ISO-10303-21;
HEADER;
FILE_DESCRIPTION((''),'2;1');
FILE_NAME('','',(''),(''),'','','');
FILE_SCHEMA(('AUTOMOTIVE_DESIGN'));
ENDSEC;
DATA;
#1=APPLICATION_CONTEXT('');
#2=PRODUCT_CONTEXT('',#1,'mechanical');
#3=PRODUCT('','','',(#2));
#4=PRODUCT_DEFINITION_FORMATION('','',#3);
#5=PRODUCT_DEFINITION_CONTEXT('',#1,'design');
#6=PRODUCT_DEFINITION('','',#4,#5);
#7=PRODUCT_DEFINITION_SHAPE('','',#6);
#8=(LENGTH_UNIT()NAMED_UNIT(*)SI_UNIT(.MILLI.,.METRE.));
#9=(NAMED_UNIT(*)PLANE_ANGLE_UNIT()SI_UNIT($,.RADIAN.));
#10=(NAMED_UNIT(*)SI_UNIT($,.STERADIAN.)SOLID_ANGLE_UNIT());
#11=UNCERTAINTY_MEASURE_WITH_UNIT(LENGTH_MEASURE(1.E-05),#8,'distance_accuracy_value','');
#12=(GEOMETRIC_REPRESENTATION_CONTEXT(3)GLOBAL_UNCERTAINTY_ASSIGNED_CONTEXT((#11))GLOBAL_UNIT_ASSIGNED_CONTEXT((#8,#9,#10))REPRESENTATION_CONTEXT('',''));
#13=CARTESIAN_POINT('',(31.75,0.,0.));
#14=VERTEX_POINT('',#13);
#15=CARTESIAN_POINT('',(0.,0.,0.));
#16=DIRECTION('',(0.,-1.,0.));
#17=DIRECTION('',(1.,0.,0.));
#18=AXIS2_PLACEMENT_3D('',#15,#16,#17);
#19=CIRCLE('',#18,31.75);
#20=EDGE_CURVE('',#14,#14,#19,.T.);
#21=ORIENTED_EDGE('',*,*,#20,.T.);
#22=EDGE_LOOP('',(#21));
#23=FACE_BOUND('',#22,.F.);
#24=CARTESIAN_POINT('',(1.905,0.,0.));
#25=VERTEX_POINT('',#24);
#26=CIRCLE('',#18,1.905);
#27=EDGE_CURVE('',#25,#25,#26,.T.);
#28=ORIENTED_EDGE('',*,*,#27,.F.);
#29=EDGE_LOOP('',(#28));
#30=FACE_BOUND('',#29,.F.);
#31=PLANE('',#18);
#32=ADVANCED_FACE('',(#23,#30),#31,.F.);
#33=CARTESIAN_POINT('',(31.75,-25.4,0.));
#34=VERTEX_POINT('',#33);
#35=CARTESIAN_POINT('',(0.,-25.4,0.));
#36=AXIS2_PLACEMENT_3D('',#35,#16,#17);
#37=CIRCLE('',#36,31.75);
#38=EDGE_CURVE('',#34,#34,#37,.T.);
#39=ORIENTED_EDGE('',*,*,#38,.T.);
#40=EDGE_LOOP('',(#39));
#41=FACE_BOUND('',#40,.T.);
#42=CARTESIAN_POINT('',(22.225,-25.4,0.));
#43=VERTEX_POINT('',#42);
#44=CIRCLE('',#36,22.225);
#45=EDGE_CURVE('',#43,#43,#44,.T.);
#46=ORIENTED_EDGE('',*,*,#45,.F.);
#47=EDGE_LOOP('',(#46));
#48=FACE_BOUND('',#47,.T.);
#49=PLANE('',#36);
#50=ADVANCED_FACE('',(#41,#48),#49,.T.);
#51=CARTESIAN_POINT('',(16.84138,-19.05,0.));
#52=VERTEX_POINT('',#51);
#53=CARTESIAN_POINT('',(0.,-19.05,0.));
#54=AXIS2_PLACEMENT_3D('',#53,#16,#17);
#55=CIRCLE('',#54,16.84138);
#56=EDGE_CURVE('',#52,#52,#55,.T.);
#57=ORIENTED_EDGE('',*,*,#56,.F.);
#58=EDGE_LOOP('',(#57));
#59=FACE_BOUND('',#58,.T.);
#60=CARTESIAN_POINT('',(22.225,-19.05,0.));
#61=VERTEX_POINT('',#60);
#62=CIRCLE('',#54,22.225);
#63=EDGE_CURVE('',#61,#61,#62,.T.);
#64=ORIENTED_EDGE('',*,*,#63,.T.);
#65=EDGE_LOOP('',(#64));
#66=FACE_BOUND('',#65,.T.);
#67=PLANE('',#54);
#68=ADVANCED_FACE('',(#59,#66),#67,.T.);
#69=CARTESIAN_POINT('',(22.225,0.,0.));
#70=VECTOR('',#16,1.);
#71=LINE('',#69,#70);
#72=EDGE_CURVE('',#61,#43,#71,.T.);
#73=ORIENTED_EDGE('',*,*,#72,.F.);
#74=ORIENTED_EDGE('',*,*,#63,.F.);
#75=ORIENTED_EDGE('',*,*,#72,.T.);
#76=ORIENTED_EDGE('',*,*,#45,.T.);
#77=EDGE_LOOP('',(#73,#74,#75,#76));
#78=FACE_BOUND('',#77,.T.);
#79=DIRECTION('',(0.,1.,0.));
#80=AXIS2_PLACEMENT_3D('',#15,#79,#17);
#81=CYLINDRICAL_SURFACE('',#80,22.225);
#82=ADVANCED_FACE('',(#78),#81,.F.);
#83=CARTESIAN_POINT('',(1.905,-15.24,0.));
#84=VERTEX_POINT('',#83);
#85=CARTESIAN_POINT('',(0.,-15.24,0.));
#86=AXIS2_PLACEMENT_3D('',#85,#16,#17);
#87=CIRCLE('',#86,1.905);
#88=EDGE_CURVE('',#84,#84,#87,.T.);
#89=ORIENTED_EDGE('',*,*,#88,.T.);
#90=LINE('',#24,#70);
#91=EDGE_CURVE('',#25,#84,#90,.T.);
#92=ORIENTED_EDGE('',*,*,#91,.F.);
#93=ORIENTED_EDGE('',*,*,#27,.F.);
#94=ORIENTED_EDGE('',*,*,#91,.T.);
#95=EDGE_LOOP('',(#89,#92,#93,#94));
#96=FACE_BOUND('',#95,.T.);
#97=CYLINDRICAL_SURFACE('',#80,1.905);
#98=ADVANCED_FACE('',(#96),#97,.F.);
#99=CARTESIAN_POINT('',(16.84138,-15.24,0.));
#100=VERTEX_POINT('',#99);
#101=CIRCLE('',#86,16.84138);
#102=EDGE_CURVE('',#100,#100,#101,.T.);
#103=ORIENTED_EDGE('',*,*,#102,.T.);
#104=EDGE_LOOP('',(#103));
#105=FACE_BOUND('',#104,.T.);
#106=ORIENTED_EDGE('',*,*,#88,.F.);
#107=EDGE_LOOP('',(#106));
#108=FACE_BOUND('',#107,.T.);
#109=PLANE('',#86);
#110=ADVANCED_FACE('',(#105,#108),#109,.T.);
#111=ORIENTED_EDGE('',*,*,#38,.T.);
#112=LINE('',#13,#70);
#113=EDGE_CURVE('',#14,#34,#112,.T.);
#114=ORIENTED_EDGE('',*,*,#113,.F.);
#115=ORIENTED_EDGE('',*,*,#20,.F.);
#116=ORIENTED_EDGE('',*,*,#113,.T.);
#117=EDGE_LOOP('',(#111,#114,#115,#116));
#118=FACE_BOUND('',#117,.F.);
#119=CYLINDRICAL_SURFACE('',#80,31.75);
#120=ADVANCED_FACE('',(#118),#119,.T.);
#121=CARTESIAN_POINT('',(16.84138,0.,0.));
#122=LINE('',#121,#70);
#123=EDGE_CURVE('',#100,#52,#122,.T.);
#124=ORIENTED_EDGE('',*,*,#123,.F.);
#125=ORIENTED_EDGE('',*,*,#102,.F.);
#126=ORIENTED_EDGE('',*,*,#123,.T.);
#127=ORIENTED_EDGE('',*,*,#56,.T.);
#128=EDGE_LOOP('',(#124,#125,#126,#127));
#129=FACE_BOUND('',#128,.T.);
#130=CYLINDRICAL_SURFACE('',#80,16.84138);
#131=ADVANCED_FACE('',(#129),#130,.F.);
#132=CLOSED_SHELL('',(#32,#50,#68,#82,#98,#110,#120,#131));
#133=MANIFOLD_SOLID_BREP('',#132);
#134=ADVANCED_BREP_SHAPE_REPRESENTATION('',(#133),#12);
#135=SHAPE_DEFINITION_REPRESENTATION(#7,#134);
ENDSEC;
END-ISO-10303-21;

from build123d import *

# Parameters (mm, degrees)
F0_R     = 22.225
F0_R_2   = 16.8413804611
F1_DEPTH = 19.05
F0_R_3   = 31.75
F2_DEPTH = 25.4
F0_R_4   = 1.905
F4_DEPTH = 15.24


# Not quite as in the source:
# - the program builds the solid bodies; features that only make, move or delete a surface that nothing else refers to are left out


with BuildPart() as f1:
    # F0 (on Front) → F1 (new body)
    with BuildSketch(Plane.XZ):
        Circle(F0_R)
        Circle(F0_R_2, mode=Mode.SUBTRACT)
    extrude(amount=F1_DEPTH)

    # F0 (on Front) → F2 (join)
    with BuildSketch(Plane.XZ):
        Circle(F0_R_3)
        Circle(F0_R, mode=Mode.SUBTRACT)
    extrude(amount=F2_DEPTH)

    # F0 (on Front) → F4 (join)
    with BuildSketch(Plane.XZ):
        Circle(F0_R_2)
        Circle(F0_R_4, mode=Mode.SUBTRACT)
    extrude(amount=F4_DEPTH)


solid = f1.part
